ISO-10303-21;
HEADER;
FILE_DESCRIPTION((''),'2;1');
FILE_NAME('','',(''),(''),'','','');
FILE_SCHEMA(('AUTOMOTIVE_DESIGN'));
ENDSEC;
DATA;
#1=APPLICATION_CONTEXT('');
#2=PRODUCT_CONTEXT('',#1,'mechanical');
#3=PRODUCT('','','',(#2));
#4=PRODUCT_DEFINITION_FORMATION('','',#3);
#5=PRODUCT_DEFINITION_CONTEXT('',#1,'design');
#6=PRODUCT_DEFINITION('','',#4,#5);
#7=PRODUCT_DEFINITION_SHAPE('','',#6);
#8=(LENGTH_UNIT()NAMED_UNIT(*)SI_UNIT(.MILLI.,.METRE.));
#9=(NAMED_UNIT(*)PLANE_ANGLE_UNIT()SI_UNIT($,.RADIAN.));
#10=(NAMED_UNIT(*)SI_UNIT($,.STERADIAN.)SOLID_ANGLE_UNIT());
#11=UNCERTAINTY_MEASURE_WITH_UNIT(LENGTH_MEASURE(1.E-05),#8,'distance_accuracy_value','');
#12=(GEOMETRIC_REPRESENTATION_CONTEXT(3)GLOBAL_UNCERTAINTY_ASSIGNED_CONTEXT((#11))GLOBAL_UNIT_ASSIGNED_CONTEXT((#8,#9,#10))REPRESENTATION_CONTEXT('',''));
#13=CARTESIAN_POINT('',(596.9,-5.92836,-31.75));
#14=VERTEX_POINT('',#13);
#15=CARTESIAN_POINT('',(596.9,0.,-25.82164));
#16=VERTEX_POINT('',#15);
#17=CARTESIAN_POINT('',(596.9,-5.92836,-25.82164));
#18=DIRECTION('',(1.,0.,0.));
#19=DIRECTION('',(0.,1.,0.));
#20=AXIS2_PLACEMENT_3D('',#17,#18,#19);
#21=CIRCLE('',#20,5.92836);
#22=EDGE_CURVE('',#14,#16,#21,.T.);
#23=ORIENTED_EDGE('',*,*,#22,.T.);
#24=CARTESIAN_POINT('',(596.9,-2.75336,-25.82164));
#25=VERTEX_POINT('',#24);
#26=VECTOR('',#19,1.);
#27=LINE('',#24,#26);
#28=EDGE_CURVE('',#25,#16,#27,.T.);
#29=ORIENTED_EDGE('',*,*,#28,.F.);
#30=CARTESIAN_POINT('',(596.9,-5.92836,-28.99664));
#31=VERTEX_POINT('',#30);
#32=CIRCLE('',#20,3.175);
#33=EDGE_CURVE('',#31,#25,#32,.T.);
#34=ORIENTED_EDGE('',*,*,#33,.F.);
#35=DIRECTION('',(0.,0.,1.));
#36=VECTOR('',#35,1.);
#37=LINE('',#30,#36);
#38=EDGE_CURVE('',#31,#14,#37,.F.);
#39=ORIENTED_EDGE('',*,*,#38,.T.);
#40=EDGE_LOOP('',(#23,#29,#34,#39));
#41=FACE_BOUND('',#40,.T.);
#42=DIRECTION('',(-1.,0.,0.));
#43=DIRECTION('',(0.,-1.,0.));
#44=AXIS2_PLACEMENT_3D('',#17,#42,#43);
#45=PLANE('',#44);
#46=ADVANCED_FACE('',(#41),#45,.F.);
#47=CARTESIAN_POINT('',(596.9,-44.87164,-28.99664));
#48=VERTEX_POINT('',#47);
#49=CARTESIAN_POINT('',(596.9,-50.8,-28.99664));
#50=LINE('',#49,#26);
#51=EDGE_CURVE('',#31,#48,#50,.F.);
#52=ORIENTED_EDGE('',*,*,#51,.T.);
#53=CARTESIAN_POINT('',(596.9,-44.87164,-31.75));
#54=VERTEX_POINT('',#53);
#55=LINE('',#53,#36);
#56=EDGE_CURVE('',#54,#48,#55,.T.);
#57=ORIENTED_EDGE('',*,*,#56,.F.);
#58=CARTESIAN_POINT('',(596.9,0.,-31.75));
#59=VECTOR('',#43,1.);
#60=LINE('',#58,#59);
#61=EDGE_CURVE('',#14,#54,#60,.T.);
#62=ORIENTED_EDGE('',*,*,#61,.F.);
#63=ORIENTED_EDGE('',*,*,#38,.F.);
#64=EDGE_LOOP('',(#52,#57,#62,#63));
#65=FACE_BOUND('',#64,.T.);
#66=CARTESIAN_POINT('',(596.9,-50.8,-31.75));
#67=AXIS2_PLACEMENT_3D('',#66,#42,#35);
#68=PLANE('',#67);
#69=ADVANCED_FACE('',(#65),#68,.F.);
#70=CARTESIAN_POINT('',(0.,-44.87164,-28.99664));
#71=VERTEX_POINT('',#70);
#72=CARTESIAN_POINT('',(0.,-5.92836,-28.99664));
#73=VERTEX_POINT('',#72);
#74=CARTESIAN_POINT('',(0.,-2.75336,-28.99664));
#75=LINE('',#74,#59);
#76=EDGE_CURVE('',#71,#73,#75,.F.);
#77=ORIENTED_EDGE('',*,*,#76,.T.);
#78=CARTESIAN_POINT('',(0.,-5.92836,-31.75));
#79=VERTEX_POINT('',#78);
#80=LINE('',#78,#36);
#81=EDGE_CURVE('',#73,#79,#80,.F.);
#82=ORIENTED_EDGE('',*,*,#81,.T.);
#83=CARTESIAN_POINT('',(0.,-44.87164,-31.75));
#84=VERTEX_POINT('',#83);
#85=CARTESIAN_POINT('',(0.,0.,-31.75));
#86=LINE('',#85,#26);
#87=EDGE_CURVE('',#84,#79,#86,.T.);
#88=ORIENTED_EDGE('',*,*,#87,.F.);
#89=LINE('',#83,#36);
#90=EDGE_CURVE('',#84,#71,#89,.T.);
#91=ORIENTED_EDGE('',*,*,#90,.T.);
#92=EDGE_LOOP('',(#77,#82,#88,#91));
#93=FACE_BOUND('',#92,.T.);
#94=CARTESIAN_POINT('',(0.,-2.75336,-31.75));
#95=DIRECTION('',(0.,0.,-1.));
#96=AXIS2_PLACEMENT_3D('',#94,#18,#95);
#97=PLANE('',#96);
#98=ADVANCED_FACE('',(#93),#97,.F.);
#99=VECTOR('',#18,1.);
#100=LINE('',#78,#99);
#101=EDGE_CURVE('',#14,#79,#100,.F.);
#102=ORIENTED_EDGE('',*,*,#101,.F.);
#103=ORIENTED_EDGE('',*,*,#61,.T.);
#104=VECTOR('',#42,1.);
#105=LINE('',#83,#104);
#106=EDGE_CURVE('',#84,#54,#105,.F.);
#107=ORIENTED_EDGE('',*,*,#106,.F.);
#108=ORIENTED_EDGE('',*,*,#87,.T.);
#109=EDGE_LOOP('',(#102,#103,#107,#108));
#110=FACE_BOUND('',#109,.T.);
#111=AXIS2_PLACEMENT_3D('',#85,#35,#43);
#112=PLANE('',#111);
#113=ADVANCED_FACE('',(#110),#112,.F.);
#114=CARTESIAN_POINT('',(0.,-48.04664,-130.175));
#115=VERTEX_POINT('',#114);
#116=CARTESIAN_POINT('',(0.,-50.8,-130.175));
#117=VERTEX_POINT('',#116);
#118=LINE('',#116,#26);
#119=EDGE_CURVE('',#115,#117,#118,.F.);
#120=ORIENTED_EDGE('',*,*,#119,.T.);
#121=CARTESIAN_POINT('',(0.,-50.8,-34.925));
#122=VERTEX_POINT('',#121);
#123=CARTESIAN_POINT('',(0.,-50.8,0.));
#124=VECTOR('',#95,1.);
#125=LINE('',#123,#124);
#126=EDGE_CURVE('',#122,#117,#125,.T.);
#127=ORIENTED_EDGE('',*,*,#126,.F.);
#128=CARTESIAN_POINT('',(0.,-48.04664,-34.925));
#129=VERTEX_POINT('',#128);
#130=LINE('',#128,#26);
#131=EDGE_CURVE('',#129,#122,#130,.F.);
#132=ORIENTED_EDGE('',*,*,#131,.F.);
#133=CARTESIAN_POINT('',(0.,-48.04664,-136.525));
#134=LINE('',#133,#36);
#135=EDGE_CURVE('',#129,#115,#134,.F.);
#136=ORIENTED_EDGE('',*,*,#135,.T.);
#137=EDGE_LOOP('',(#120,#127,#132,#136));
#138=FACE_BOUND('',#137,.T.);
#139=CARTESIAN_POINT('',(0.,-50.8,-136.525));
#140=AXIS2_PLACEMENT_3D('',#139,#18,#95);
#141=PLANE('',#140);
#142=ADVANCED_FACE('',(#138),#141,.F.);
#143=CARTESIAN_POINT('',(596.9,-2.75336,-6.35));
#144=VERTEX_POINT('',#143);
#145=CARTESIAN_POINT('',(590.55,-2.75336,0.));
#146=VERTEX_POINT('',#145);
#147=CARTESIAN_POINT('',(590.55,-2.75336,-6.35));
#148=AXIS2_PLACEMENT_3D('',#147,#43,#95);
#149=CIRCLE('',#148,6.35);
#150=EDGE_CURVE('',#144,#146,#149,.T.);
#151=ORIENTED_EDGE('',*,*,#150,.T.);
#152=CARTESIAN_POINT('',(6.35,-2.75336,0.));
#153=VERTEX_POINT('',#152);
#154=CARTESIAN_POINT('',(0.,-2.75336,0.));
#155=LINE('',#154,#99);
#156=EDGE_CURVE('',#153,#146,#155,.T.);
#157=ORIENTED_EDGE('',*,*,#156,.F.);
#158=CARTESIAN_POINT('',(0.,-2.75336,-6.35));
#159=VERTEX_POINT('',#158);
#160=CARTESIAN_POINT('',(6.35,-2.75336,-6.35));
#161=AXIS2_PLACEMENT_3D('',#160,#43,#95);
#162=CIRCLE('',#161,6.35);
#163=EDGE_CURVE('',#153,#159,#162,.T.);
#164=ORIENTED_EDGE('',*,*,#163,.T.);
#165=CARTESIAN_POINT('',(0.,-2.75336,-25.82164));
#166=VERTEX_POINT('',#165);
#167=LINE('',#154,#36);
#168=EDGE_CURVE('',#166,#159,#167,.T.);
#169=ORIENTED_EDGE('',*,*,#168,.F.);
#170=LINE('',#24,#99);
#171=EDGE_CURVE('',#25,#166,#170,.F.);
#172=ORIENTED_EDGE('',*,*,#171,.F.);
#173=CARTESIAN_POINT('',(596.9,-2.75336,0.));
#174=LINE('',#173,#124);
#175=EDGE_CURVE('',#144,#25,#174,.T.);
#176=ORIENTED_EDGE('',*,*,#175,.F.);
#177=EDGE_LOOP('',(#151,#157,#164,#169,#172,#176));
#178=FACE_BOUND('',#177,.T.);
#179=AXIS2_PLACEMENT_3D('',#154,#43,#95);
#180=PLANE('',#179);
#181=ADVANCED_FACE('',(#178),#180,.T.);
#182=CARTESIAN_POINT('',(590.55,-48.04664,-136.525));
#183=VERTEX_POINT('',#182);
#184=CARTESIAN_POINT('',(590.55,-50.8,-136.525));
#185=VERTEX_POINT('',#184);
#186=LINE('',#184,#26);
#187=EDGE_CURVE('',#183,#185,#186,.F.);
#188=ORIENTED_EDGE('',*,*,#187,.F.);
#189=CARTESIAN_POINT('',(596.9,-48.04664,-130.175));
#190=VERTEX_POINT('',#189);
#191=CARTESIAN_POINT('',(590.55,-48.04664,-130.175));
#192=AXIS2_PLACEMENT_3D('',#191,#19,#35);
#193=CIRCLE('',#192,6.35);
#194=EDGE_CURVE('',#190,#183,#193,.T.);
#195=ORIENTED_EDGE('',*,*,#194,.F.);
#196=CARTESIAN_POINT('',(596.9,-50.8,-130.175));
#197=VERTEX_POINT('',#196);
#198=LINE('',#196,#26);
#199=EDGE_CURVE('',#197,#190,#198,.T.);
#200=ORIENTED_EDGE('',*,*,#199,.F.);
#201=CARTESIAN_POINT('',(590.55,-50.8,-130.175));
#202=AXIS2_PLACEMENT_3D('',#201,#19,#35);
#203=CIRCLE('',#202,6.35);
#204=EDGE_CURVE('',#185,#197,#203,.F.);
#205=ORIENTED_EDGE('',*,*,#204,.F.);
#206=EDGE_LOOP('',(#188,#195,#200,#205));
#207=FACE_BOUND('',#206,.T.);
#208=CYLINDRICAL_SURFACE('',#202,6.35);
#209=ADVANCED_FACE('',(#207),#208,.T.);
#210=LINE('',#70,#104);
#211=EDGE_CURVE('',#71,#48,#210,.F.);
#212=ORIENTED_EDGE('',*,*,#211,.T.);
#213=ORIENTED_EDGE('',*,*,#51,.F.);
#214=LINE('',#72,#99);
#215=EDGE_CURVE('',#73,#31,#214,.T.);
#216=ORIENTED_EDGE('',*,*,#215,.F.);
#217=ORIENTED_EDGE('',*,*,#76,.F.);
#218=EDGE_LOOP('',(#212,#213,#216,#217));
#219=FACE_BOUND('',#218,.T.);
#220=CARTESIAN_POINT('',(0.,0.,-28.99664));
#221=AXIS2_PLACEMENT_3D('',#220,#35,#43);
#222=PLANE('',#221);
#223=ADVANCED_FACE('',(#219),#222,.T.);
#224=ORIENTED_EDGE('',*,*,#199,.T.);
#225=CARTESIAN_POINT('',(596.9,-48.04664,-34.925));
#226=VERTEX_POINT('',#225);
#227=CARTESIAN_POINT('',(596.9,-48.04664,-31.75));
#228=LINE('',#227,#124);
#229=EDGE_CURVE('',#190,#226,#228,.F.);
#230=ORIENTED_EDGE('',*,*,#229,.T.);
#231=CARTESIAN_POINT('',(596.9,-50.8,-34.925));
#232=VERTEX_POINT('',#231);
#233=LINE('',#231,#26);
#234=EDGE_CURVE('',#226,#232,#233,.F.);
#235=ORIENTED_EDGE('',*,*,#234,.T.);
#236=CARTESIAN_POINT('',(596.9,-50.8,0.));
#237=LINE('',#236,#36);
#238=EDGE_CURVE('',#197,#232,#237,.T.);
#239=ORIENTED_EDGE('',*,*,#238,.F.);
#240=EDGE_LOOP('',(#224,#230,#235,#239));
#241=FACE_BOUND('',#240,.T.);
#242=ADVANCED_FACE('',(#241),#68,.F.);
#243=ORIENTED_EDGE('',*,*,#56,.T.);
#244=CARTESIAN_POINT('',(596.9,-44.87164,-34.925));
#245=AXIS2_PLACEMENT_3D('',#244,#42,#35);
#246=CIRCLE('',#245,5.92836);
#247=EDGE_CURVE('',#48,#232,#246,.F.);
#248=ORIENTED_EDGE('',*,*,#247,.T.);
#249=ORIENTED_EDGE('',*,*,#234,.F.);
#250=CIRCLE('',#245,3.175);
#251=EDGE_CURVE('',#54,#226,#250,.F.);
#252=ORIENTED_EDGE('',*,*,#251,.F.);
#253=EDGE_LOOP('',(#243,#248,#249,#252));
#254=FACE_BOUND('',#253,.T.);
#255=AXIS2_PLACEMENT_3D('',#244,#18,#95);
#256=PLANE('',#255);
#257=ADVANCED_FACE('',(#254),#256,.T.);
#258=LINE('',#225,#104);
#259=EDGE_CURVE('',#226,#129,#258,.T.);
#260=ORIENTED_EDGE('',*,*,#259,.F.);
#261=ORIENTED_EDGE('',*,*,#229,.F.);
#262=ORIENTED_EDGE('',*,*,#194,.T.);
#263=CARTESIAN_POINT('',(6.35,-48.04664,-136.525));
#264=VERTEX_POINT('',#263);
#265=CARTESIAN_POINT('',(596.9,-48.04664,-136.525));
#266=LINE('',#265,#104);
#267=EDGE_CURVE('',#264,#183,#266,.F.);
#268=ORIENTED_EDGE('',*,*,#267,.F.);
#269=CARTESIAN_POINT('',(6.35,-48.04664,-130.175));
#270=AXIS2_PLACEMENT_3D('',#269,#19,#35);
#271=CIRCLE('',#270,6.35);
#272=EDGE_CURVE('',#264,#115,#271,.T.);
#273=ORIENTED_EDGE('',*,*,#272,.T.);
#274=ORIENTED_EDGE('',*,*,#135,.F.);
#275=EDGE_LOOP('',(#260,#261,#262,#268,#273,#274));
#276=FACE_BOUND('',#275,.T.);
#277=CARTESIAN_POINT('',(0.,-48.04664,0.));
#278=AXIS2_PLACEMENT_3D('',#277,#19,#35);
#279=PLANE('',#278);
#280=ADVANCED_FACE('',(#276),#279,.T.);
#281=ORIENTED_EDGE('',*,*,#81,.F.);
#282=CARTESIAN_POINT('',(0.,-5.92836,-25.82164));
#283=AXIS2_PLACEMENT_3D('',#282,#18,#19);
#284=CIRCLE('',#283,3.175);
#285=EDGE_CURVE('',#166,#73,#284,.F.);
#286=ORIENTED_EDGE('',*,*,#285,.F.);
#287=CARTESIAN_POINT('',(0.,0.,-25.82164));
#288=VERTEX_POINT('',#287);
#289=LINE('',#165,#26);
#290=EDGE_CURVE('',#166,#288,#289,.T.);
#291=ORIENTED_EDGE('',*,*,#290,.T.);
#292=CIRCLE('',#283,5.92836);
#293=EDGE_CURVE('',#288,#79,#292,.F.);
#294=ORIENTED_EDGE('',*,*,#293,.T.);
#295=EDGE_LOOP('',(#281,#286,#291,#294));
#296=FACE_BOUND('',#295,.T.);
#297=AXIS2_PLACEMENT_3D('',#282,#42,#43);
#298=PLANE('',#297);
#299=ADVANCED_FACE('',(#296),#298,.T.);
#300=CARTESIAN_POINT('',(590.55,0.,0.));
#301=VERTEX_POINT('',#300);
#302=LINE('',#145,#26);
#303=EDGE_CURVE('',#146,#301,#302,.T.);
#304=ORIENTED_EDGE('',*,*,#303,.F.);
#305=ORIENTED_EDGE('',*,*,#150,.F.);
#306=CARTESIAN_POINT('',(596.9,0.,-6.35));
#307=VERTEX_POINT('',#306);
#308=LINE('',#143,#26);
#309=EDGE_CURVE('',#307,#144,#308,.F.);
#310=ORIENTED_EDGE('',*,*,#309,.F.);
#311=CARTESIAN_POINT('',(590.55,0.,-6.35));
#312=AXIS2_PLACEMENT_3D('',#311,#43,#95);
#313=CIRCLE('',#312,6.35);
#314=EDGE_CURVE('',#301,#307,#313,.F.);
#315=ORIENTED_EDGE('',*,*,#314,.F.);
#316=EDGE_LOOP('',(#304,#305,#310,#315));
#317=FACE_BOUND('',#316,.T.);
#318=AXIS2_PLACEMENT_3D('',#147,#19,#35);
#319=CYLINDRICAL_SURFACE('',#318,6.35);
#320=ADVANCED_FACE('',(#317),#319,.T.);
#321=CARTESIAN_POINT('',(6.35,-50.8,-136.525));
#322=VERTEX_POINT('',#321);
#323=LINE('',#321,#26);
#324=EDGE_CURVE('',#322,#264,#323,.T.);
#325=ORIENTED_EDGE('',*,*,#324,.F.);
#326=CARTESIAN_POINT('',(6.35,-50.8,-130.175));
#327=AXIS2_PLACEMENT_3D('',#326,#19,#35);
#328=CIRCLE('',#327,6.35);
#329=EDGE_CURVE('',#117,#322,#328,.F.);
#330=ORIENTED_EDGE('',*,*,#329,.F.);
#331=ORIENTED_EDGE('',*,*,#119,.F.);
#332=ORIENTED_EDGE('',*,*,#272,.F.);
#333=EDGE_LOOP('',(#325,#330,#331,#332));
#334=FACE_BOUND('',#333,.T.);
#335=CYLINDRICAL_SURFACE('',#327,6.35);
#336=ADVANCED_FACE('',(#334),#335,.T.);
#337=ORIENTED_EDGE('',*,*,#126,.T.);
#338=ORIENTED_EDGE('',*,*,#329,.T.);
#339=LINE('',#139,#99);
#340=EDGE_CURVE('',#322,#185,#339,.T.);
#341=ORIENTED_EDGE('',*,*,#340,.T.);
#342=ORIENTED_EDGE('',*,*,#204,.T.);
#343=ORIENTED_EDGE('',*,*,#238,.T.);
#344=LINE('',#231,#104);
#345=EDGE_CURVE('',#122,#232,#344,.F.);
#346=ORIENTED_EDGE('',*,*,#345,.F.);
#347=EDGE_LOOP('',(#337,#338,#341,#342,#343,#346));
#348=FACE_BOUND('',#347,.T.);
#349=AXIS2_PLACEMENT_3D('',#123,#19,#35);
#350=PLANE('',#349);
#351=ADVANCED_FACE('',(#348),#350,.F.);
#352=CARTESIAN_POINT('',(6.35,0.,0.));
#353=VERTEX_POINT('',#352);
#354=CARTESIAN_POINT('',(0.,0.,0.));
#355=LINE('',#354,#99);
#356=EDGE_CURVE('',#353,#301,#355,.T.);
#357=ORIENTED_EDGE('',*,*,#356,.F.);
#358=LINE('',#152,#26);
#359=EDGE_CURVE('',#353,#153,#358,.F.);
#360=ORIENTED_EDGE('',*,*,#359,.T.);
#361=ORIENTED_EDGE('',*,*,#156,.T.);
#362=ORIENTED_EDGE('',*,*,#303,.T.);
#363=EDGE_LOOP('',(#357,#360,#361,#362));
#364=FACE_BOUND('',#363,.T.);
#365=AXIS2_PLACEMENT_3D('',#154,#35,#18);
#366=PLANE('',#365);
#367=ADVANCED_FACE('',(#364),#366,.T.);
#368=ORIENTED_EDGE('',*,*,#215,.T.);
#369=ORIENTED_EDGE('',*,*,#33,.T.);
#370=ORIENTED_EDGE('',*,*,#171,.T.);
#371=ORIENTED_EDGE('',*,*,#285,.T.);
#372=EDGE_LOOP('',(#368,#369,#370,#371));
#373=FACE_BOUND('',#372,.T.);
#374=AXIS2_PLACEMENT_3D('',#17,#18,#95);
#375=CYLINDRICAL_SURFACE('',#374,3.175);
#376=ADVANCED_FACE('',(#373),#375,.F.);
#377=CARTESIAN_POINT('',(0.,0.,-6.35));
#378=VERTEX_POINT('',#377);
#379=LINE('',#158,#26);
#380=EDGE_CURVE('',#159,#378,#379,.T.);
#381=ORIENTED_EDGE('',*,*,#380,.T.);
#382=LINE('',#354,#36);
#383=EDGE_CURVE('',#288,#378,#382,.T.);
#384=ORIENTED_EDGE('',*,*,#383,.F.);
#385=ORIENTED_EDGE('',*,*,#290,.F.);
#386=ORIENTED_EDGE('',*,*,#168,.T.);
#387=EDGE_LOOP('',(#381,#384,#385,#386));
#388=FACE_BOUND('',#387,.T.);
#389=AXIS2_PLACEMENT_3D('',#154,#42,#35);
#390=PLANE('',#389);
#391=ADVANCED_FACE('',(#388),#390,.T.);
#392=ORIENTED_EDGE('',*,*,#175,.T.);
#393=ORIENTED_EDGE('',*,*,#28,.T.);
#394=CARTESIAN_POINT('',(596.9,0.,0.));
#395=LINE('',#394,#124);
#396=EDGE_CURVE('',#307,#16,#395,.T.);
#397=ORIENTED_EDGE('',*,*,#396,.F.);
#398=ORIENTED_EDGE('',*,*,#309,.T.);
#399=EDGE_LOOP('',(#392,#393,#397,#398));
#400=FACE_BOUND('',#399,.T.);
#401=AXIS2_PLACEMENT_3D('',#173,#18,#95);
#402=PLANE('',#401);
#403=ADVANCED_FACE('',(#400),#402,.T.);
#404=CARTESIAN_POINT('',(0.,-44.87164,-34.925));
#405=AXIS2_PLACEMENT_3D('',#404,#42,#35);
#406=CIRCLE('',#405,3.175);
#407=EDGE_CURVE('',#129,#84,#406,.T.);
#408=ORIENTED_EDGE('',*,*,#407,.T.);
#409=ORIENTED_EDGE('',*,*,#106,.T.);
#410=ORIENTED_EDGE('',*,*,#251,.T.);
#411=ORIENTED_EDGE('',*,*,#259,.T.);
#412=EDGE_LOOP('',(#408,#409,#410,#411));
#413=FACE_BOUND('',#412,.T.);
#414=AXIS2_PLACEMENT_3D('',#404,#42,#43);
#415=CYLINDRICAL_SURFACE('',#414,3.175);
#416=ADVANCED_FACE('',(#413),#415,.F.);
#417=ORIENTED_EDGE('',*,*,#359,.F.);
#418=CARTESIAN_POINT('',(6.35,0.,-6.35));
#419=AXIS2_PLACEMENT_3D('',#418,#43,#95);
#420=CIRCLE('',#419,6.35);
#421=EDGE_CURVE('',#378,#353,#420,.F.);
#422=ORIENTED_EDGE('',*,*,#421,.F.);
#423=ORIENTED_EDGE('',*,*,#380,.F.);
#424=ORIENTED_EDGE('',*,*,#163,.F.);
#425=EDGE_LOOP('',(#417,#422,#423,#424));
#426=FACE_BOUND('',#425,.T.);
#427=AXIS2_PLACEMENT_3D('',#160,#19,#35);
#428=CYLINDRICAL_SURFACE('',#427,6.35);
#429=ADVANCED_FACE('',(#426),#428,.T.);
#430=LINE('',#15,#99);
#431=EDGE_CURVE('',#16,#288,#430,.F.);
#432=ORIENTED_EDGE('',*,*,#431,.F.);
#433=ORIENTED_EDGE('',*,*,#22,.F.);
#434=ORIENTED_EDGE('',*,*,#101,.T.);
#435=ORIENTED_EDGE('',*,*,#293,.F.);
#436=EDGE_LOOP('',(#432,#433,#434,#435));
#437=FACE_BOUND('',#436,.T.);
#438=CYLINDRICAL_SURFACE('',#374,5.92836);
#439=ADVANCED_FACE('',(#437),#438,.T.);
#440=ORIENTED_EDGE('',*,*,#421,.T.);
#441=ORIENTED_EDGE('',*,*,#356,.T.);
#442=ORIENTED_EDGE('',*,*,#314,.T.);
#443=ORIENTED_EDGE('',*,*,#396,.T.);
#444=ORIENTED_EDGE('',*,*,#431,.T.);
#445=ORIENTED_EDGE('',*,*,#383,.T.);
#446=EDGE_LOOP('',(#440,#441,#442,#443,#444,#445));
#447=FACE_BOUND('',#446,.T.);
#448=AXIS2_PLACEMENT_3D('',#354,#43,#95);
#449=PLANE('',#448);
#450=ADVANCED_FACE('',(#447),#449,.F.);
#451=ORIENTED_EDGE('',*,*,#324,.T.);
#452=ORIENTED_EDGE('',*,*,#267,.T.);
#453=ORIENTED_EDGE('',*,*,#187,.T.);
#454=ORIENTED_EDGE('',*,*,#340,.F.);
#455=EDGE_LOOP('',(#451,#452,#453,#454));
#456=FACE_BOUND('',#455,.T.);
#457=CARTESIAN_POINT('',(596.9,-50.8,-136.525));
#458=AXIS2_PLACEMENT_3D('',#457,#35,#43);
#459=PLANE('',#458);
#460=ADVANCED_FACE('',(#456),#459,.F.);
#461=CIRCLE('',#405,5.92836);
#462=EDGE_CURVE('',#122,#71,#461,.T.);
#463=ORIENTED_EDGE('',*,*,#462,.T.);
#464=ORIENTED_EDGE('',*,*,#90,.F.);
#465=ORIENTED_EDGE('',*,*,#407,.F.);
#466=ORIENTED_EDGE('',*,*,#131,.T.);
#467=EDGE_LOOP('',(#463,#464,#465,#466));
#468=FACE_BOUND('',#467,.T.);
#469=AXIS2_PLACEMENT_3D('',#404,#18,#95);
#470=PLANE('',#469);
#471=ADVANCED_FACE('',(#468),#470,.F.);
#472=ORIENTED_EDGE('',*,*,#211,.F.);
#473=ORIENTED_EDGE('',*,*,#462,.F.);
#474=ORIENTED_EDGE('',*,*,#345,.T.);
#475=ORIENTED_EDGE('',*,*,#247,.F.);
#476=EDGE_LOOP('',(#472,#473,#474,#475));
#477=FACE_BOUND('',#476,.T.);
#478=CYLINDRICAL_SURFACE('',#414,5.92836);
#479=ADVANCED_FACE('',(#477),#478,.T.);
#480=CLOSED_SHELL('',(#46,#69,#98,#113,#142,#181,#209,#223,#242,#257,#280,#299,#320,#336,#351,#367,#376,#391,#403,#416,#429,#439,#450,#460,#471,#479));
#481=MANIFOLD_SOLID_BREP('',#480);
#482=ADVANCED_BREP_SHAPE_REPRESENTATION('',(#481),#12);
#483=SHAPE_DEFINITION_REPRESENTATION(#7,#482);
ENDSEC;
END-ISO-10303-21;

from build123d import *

# Parameters (mm, degrees)
SKETCH1_W                    = 596.9
SKETCH1_H                    = 31.75
BASE_FLANGE1_DEPTH           = 2.75336
EDGE_FLANGE1_STRIP_W         = 17.36344
EDGE_FLANGE1_STRIP_H         = 2.75336
EDGE_FLANGE1_STRIP_CUT_DEPTH = 596.9
EDGE_FLANGE1_DEPTH           = 596.9
EDGE_FLANGE2_STRIP_W         = 17.36344
EDGE_FLANGE2_STRIP_H         = 2.75336
EDGE_FLANGE2_STRIP_CUT_DEPTH = 596.9
EDGE_FLANGE2_DEPTH           = 596.9
BREAK_CORNER1_START          = -50.8
BREAK_CORNER1_DEPTH          = 50.8


# Read off the part's stored shape, not the designer's step: Break-Corner1
# Sheet-metal steps are written as plain solids
with BuildPart() as part:
    # Sketch1 → Base-Flange1 (new body)
    with BuildSketch(Plane(origin=(0, 0, 0), x_dir=(1, 0, 0), z_dir=(0, 1, 0))):
        with Locations((298.45, 15.875)):
            Rectangle(SKETCH1_W, SKETCH1_H)
    extrude(amount=-BASE_FLANGE1_DEPTH)

    # Edge-Flange1 strip (across the edge) → Edge-Flange1 strip cut (cut)
    with BuildSketch(Plane(origin=(0, -2.75336, -31.75), x_dir=(0, 0, 1), z_dir=(1, 0, 0))):
        with Locations((-2.75336, -1.37668)):
            Rectangle(EDGE_FLANGE1_STRIP_W, EDGE_FLANGE1_STRIP_H)
    extrude(amount=EDGE_FLANGE1_STRIP_CUT_DEPTH, mode=Mode.SUBTRACT)

    # Edge-Flange1 section (across the edge) → Edge-Flange1 (add)
    with BuildSketch(Plane(origin=(0, -2.75336, -31.75), x_dir=(0, 0, 1), z_dir=(1, 0, 0))):
        with BuildLine():
            Line((0, 3.175), (0, 48.04664))
            Line((0, 48.04664), (2.75336, 48.04664))
            Line((2.75336, 48.04664), (2.75336, 3.175))
            ThreePointArc((2.75336, 3.175), (3.68329597, 0.92993597), (5.92836, 0))
            Line((5.92836, 0), (5.92836, -2.75336))
            ThreePointArc((5.92836, -2.75336), (1.736376443, -1.016983557), (0, 3.175))
        make_face()
    extrude(amount=EDGE_FLANGE1_DEPTH)

    # Edge-Flange2 strip (across the edge) → Edge-Flange2 strip cut (cut)
    with BuildSketch(Plane(origin=(596.9, -50.8, -31.75), x_dir=(0, 1, 0), z_dir=(-1, 0, 0))):
        with Locations((-2.75336, -1.37668)):
            Rectangle(EDGE_FLANGE2_STRIP_W, EDGE_FLANGE2_STRIP_H)
    extrude(amount=EDGE_FLANGE2_STRIP_CUT_DEPTH, mode=Mode.SUBTRACT)

    # Edge-Flange2 section (across the edge) → Edge-Flange2 (add)
    with BuildSketch(Plane(origin=(596.9, -50.8, -31.75), x_dir=(0, 1, 0), z_dir=(-1, 0, 0))):
        with BuildLine():
            Line((0, 3.175), (0, 104.775))
            Line((0, 104.775), (2.75336, 104.775))
            Line((2.75336, 104.775), (2.75336, 3.175))
            ThreePointArc((2.75336, 3.175), (3.68329597, 0.92993597), (5.92836, 0))
            Line((5.92836, 0), (5.92836, -2.75336))
            ThreePointArc((5.92836, -2.75336), (1.736376443, -1.016983557), (0, 3.175))
        make_face()
    extrude(amount=EDGE_FLANGE2_DEPTH)

    # Break-Corner1 outline → Break-Corner1 (cut)
    with BuildSketch(Plane(origin=(0, 0, 0), x_dir=(1, 0, 0), z_dir=(0, 1, 0)).offset(BREAK_CORNER1_START)):
        with BuildLine():
            Line((0, 0), (6.35, 0))
            ThreePointArc((6.35, 0), (1.859871939, 1.859871939), (0, 6.35))
            Line((0, 6.35), (0, 0))
        make_face()
        with BuildLine():
            ThreePointArc((596.9, 6.35), (595.040128061, 1.859871939), (590.55, 0))
            Line((590.55, 0), (596.9, 0))
            Line((596.9, 0), (596.9, 6.35))
        make_face()
        with BuildLine():
            ThreePointArc((0, 130.175), (1.859871939, 134.665128061), (6.35, 136.525))
            Line((6.35, 136.525), (0, 136.525))
            Line((0, 136.525), (0, 130.175))
        make_face()
        with BuildLine():
            ThreePointArc((590.55, 136.525), (595.040128061, 134.665128061), (596.9, 130.175))
            Line((596.9, 130.175), (596.9, 136.525))
            Line((596.9, 136.525), (590.55, 136.525))
        make_face()
    extrude(amount=BREAK_CORNER1_DEPTH, mode=Mode.SUBTRACT)


solid = part.part
